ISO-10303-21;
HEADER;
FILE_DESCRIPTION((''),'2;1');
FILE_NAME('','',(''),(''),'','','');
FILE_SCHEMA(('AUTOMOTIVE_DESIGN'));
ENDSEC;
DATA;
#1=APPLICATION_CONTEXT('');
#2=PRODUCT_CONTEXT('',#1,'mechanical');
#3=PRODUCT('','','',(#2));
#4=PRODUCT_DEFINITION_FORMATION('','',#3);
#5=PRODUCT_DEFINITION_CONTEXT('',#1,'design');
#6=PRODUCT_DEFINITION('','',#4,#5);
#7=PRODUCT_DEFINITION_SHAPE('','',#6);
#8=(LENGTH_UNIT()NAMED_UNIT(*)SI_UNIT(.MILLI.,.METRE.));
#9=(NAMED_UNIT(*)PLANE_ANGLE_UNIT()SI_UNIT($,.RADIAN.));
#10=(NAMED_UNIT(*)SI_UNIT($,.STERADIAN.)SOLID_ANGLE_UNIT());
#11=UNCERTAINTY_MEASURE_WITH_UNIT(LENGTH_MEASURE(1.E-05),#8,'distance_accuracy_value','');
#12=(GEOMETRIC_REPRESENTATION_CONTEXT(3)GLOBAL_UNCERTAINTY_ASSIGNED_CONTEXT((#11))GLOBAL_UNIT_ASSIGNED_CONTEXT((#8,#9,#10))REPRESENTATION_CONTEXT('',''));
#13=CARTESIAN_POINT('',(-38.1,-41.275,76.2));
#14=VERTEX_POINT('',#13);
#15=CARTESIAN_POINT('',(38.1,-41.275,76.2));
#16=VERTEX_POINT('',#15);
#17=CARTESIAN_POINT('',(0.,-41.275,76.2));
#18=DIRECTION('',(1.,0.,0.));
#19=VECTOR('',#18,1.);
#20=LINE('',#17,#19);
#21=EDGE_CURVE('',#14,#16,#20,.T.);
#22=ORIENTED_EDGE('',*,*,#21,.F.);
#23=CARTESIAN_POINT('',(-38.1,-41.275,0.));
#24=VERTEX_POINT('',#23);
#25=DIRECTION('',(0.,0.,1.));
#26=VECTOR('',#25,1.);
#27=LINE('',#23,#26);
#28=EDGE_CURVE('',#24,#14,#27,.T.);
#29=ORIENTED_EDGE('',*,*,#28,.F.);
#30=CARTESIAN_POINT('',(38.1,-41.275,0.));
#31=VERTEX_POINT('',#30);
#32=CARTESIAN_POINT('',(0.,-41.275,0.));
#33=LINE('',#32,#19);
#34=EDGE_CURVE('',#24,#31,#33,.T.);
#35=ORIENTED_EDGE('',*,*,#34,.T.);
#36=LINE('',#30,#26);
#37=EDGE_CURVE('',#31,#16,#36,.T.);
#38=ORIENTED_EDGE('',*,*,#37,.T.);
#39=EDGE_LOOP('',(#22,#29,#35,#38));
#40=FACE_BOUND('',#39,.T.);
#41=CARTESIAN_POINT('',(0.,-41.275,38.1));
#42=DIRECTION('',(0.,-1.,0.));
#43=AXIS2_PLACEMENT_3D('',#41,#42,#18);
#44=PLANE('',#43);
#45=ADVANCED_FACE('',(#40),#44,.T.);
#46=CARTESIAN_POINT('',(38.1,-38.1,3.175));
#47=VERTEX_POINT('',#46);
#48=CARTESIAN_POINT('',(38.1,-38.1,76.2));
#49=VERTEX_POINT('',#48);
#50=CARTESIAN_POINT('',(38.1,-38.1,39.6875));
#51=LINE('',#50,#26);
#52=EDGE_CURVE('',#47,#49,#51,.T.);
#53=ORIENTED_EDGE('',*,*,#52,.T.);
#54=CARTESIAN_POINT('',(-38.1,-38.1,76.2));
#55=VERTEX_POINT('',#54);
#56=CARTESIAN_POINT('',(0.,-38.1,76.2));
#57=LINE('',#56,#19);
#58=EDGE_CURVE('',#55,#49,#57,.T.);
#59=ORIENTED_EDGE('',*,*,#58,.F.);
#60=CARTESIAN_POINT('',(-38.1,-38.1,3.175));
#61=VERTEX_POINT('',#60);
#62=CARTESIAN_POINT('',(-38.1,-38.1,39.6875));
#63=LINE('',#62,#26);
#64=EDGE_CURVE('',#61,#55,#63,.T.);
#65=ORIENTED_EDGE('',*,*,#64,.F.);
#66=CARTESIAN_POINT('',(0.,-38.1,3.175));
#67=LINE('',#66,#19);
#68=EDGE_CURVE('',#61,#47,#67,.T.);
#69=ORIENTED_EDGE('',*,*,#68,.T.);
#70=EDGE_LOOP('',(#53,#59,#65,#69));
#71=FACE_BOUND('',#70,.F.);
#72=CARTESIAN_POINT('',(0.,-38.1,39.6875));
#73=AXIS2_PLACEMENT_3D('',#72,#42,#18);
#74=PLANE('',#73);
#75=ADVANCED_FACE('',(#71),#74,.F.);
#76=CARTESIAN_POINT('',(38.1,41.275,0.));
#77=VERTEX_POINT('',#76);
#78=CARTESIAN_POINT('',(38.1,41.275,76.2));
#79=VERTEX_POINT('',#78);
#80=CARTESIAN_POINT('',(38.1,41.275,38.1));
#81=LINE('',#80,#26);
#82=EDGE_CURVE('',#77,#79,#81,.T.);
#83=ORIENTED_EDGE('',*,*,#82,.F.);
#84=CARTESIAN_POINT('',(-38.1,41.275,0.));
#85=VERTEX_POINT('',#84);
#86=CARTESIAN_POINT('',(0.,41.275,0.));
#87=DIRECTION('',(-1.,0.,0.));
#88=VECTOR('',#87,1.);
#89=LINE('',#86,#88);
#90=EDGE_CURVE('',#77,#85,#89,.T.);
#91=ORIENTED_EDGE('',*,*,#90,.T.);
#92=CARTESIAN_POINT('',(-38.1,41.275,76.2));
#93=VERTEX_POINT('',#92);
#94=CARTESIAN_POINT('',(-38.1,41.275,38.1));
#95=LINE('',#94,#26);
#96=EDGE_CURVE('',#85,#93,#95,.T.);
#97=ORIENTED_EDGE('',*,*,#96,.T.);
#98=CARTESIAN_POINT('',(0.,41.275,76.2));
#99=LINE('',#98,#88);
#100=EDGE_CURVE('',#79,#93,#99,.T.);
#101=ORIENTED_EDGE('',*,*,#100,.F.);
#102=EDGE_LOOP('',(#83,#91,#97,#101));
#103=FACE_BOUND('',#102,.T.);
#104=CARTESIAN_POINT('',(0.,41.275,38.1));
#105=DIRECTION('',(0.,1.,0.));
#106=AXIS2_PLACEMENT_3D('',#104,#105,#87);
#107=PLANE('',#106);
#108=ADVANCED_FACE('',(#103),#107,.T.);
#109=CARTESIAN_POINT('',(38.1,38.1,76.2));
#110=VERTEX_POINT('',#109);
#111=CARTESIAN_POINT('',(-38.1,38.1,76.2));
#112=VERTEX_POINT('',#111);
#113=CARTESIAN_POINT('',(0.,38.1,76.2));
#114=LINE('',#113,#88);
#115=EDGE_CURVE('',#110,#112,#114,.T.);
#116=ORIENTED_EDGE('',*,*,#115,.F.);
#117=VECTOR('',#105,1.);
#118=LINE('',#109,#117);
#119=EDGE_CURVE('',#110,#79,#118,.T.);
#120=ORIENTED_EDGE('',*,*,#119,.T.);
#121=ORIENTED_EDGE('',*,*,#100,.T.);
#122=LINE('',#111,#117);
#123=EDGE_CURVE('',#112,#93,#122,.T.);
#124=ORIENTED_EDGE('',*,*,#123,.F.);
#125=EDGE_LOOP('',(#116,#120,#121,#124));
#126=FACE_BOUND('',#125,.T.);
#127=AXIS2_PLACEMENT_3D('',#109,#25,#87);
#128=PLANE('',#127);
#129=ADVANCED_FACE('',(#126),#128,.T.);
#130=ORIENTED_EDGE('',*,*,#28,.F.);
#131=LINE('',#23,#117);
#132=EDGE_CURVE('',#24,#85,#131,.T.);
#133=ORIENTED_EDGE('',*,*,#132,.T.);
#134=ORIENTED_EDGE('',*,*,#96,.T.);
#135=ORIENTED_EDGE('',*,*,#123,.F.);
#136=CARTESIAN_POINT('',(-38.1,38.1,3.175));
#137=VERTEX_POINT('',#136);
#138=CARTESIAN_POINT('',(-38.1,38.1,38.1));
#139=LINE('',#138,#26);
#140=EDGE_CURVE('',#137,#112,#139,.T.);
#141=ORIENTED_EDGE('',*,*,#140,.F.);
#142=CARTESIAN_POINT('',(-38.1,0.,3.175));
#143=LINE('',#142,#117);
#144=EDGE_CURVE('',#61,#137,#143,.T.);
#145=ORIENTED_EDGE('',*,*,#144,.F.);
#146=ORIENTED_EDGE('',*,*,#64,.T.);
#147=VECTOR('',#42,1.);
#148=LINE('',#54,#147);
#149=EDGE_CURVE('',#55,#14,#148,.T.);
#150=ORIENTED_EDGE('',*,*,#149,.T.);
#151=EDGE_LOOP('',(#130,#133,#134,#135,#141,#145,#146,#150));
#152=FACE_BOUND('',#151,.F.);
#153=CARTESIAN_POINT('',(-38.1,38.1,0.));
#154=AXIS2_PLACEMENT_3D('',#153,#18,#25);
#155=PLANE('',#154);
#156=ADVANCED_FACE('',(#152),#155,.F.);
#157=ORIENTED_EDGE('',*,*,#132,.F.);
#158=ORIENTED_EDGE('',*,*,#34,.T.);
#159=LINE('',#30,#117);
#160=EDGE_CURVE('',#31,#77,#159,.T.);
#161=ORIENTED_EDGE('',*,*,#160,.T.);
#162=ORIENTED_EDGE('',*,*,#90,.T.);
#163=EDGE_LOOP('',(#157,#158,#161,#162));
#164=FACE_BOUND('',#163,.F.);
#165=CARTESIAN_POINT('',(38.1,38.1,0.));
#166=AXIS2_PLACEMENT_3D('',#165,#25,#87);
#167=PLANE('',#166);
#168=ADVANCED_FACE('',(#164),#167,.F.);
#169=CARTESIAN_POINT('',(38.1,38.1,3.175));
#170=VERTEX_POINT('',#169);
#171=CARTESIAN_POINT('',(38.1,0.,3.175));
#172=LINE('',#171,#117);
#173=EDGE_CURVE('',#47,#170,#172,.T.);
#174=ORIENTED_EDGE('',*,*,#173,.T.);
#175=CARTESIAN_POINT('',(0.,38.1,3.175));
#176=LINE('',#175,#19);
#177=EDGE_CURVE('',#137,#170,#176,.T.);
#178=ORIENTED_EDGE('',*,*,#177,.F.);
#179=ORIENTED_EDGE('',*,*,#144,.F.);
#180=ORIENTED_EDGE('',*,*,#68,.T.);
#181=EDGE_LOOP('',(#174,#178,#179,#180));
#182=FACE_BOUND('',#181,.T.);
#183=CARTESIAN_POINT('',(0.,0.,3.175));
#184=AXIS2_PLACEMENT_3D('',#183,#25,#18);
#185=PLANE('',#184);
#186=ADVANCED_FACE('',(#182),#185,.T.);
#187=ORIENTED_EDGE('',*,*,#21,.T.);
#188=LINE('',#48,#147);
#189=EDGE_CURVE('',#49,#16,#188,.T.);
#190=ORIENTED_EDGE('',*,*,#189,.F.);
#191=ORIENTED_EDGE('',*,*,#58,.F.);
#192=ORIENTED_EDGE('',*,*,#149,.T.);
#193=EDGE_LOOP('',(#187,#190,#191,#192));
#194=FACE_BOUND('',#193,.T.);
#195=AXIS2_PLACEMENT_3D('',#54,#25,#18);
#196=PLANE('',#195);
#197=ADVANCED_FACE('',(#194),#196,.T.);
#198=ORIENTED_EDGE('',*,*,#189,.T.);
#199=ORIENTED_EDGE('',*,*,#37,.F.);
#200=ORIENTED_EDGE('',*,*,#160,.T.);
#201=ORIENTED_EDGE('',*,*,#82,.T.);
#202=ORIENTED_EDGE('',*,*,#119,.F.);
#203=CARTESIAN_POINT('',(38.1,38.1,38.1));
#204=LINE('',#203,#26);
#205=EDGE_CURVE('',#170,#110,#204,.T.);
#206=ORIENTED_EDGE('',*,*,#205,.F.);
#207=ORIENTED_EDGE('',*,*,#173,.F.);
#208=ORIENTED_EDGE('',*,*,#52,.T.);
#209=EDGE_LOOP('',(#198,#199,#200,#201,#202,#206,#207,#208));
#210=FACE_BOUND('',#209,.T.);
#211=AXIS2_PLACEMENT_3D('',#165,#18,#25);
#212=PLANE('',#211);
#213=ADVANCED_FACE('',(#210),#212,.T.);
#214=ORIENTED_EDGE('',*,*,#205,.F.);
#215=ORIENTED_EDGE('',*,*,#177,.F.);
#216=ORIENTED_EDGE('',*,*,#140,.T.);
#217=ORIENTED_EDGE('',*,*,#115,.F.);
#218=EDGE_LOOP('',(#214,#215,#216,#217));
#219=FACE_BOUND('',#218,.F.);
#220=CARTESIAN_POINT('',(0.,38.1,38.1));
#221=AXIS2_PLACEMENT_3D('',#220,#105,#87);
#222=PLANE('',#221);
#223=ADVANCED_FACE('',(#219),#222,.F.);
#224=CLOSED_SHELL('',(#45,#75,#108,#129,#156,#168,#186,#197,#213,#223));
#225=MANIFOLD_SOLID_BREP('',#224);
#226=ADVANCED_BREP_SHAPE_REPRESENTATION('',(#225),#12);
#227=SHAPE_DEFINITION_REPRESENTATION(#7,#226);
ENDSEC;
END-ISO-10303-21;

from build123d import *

# Parameters (mm, degrees)
F0_W     = 76.2
F0_H     = 76.2
F1_DEPTH = 3.175
F2_W     = 76.2
F2_H     = 73.025
F3_DEPTH = 3.175
F2_H_2   = 76.2
F4_DEPTH = 3.175
F5_W     = 76.2
F5_H     = 76.2
F6_DEPTH = 3.175


# Not quite as in the source:
# - a length typed as a fraction of an inch, garbled in the dataset ("3 / 203.2 mm" for 3/8 in), is restored


with BuildPart() as f1:
    # F0 (on Top) → F1 (new body)
    with BuildSketch(Plane.XY):
        Rectangle(F0_W, F0_H)
    extrude(amount=F1_DEPTH)

    # F2 (on face) → F3 (join)
    with BuildSketch(Plane.XZ.offset(38.1)):
        with Locations((0, 39.6875)):
            Rectangle(F2_W, F2_H)
    extrude(amount=F3_DEPTH)

    # F2 (on face) → F4 (join)
    with BuildSketch(Plane.XZ.offset(38.1)):
        with Locations((0, 38.1)):
            Rectangle(F2_W, F2_H_2)
    extrude(amount=F4_DEPTH)

    # F5 (on face) → F6 (join)
    with BuildSketch(Plane(origin=(0, 38.1, 0), x_dir=(-1, 0, 0), z_dir=(0, 1, 0))):
        with Locations((0, 38.1)):
            Rectangle(F5_W, F5_H)
    extrude(amount=F6_DEPTH)


solid = f1.part
